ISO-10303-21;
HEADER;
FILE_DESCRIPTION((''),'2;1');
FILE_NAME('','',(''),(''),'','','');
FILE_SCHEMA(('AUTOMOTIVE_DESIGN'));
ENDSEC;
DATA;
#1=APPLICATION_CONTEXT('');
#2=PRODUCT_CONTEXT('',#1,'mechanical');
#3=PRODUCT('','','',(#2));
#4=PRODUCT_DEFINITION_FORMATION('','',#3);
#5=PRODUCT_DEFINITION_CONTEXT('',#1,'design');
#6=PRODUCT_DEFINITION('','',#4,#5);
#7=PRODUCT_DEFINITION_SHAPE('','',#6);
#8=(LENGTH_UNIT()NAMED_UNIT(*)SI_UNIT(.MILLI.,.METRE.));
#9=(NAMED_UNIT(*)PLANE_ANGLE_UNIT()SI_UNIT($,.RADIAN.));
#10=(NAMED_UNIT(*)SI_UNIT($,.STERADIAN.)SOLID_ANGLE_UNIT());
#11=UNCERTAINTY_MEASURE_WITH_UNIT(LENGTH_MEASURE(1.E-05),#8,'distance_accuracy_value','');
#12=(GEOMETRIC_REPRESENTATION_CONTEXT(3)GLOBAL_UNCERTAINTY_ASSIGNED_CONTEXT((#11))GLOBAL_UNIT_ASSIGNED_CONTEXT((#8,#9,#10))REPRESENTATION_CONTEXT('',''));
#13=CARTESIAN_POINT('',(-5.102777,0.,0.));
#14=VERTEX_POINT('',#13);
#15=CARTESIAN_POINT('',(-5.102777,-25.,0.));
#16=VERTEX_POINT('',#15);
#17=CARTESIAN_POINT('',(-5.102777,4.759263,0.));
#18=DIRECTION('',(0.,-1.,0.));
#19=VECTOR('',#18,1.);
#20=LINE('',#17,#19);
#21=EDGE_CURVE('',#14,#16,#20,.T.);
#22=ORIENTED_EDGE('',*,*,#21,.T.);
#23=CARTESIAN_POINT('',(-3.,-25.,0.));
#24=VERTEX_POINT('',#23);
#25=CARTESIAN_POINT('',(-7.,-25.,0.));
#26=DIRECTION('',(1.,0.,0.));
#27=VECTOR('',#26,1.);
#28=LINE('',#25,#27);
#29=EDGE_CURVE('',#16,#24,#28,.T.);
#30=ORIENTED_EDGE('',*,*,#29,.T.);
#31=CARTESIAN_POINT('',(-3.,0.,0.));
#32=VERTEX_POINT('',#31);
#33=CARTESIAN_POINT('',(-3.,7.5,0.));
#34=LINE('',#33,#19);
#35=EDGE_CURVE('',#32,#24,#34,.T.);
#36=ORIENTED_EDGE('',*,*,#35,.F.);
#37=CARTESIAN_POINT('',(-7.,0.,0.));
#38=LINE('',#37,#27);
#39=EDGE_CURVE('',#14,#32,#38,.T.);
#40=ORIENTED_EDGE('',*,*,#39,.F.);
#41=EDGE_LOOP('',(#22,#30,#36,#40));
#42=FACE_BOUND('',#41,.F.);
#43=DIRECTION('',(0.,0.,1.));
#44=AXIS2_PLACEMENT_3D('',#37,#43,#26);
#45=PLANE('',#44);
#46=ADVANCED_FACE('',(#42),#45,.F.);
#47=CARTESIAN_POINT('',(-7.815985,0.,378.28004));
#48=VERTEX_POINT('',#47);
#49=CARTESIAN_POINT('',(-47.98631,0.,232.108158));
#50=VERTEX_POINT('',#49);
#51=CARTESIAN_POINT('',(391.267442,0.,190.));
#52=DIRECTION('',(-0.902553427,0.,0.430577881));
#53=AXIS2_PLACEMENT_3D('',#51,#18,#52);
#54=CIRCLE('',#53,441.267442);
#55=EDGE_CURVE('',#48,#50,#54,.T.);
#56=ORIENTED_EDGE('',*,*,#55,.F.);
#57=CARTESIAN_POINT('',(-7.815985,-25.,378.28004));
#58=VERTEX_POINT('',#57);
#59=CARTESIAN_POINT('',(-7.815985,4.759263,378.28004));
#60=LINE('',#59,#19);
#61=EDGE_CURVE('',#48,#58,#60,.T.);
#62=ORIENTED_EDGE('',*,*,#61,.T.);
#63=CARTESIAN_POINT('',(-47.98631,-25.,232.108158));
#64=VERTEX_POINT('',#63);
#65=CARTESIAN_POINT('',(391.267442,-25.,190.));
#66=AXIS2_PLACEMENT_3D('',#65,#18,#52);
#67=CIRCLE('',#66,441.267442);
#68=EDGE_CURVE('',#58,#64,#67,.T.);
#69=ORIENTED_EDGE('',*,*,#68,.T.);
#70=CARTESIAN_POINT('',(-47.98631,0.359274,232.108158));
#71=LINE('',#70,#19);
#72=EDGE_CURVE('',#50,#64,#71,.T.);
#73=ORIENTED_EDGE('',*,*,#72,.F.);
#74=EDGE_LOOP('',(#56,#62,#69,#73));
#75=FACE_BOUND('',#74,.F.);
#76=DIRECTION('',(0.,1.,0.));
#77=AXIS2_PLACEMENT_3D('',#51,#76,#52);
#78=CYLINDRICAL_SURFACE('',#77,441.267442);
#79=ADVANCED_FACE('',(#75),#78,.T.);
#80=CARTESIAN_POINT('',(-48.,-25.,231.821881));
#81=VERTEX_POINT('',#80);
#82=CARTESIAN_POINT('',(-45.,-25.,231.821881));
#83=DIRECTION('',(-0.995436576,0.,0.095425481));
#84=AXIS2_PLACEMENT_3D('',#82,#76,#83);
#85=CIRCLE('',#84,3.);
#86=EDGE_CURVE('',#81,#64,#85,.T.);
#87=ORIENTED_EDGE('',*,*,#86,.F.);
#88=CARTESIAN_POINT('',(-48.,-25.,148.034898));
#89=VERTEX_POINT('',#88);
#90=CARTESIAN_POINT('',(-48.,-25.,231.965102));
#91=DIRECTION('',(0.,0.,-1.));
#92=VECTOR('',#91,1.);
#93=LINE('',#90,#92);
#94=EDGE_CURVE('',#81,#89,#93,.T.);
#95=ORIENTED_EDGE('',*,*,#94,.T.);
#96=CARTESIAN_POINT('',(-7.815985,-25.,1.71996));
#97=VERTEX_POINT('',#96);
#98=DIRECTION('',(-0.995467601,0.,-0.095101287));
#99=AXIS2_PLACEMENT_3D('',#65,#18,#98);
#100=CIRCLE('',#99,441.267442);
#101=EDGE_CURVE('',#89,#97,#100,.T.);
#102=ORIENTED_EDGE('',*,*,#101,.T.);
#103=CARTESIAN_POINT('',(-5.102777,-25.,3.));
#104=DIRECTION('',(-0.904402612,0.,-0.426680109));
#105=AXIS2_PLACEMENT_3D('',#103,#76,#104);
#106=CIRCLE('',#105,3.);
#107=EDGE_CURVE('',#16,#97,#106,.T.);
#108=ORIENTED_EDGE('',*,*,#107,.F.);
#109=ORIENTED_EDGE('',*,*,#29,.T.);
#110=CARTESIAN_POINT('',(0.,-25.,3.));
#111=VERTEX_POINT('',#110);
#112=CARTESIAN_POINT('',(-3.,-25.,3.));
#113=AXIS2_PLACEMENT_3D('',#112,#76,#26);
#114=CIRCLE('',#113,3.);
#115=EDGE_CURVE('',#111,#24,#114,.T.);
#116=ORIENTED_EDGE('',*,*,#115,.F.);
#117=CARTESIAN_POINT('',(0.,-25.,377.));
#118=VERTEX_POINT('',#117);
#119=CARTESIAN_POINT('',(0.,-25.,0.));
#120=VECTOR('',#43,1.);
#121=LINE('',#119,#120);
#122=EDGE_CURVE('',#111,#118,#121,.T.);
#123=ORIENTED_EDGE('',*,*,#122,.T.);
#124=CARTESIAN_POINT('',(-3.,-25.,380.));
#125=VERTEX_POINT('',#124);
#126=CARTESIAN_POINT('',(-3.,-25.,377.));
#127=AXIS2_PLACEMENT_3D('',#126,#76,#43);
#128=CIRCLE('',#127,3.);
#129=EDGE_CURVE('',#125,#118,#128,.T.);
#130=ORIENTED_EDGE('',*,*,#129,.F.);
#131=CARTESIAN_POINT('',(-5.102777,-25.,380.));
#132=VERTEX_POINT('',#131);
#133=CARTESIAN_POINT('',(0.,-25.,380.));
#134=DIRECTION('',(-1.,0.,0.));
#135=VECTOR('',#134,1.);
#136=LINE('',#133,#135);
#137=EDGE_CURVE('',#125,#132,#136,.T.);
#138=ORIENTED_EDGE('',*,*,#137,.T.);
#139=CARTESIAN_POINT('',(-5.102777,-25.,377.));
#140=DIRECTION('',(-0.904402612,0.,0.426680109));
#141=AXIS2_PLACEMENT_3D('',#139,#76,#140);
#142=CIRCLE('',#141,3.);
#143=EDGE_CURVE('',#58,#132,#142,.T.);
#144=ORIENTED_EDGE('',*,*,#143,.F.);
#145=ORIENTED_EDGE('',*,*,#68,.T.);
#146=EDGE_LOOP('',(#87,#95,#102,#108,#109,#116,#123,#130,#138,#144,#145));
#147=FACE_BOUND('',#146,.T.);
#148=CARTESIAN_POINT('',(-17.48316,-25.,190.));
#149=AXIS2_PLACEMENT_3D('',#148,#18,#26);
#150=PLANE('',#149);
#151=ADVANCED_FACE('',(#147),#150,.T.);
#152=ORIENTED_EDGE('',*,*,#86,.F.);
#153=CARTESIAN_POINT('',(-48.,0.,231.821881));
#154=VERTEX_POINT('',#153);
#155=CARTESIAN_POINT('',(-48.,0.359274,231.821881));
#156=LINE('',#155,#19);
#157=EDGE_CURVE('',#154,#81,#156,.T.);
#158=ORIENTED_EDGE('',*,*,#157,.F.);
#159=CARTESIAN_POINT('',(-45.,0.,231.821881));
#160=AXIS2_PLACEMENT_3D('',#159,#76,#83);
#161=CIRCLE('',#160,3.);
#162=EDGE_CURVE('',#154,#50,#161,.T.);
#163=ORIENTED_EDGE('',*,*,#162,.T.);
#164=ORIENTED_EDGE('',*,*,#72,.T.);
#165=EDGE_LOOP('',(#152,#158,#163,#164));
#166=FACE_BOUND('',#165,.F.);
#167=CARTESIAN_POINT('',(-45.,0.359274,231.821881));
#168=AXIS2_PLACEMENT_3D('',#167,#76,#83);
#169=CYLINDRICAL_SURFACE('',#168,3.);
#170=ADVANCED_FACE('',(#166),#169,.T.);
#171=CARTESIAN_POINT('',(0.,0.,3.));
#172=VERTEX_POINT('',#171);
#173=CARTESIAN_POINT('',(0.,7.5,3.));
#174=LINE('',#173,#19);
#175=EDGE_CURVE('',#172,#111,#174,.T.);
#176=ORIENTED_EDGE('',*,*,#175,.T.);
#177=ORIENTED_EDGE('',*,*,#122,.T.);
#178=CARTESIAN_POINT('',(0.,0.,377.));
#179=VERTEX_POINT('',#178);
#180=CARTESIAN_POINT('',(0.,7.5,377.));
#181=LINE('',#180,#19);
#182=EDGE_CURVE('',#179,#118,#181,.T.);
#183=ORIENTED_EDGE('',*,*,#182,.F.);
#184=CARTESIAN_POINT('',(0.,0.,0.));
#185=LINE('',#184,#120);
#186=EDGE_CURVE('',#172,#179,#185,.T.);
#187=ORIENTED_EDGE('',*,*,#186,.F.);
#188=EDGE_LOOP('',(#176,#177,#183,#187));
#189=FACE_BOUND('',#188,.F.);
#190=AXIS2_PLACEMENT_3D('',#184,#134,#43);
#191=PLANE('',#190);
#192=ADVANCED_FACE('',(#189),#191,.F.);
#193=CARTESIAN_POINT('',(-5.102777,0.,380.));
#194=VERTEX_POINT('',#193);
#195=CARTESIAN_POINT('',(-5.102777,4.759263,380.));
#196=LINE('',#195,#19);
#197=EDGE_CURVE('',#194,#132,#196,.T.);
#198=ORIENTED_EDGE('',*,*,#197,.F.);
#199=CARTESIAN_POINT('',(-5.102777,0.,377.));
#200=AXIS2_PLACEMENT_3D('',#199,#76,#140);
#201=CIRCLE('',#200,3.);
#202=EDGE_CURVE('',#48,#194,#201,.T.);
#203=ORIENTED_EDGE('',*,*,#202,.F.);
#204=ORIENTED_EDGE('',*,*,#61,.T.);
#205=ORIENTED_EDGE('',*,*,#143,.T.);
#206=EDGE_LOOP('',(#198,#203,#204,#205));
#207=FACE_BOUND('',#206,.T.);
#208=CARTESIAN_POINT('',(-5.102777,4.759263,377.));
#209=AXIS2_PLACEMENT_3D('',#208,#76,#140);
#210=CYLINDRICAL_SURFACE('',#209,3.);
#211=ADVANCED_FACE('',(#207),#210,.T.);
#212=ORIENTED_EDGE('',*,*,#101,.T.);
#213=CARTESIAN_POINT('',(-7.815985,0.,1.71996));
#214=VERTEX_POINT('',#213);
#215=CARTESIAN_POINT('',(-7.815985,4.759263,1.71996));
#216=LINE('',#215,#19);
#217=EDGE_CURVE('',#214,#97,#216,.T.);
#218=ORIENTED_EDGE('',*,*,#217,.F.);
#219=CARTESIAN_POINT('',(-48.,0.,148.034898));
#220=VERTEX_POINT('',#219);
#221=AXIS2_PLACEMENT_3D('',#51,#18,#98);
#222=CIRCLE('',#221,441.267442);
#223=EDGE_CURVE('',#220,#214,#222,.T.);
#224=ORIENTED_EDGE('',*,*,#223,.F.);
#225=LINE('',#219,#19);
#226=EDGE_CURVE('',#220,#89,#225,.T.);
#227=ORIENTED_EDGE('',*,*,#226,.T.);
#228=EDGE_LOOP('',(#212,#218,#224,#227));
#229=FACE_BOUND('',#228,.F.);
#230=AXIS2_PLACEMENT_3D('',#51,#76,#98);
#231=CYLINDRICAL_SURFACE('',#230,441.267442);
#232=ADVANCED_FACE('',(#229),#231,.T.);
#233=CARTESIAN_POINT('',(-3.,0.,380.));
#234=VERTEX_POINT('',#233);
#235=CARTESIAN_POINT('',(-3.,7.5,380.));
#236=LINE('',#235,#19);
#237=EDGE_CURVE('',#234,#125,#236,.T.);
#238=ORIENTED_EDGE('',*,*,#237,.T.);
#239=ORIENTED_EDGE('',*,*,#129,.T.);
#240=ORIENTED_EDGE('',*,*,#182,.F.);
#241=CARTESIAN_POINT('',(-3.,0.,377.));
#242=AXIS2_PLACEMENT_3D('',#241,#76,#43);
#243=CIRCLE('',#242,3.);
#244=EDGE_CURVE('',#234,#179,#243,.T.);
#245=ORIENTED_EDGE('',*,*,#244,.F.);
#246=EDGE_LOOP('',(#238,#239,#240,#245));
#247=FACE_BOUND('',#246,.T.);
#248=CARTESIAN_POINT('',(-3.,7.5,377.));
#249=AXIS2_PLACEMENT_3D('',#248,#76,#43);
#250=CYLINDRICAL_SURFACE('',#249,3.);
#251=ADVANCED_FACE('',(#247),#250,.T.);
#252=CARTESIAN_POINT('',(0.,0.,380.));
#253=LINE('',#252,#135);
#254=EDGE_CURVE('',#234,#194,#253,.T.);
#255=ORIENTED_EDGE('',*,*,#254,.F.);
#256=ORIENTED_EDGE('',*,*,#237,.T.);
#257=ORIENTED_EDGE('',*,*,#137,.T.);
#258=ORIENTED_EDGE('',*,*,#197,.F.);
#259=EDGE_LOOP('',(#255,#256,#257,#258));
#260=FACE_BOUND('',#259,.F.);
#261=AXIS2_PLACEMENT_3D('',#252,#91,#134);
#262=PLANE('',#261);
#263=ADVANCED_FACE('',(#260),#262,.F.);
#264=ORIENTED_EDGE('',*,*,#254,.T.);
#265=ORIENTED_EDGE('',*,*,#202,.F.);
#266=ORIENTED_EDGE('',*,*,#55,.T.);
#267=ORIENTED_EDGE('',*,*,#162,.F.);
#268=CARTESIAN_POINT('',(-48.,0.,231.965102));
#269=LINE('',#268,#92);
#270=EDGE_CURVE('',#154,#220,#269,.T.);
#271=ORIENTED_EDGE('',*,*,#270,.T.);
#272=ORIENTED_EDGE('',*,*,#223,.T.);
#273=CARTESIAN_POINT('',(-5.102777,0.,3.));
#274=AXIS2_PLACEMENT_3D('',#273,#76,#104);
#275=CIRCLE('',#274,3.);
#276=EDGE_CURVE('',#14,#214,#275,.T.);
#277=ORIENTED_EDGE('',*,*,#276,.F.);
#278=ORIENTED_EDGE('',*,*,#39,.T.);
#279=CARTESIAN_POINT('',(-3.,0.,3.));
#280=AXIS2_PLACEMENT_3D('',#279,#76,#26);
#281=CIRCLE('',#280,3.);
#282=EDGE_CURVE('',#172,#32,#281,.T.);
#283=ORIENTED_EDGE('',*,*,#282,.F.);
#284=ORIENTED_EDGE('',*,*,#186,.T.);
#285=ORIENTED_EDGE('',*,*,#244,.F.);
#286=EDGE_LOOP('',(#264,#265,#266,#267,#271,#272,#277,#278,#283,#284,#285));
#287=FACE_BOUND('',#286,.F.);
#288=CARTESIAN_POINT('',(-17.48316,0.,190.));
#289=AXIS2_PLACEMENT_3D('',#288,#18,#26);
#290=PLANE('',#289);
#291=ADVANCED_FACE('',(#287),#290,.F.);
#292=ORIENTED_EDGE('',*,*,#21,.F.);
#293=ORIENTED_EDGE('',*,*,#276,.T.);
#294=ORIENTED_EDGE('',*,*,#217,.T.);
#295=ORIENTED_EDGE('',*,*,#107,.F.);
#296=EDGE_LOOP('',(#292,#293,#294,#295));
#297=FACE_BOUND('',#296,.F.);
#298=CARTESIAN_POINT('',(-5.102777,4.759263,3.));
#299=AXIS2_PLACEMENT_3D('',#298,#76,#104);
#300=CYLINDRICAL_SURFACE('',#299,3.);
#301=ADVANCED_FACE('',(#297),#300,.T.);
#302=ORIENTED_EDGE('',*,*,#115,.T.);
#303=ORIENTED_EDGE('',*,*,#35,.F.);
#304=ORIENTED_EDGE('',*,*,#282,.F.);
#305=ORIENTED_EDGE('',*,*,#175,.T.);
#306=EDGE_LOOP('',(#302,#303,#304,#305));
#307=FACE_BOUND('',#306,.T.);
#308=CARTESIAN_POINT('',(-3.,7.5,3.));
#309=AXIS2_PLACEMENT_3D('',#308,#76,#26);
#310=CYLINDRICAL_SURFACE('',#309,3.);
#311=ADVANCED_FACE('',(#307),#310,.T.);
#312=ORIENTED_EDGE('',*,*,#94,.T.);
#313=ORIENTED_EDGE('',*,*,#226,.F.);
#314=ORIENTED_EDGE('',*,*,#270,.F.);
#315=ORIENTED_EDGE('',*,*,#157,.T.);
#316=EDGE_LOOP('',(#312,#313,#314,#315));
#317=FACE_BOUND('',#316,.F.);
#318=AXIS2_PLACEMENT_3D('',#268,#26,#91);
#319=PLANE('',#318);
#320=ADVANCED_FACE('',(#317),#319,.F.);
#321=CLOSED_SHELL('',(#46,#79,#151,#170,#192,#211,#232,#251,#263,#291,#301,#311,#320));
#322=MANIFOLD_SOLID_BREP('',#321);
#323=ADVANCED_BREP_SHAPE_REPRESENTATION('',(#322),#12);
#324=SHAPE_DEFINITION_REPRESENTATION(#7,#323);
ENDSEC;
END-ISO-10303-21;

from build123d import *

# Parameters (mm, degrees)
F1_DEPTH    = 25
F2_T1_DEPTH = 34.5185252635
F2_T3_DEPTH = 40
F2_T5_DEPTH = 25.7185484132


# Not quite as in the source:
# - a fillet or chamfer that OpenCascade refuses, or shapes differently, is made with other operations: its cross-section is extruded or revolved along the edge and cut away or added


with BuildPart() as f1:
    # F0 (on Front) → F1 (new body)
    with BuildSketch(Plane.XZ):
        with BuildLine():
            Line((-7, 0), (0, 0))
            Line((0, 0), (0, 380))
            Line((0, 380), (-7, 380))
            ThreePointArc((-7, 380), (-33.9910126529, 307.7803129177), (-48, 231.9651017804))
            Line((-48, 231.9651017804), (-48, 190))
            Line((-48, 190), (-48, 148.0348982196))
            ThreePointArc((-48, 148.0348982196), (-33.9910126529, 72.2196870823), (-7, 0))
        make_face()
    extrude(amount=F1_DEPTH)

    # F2: fillet of radius 3 on 5 edges, made by hand

    # F2_s2 → F2_t1 (cut)
    with BuildSketch(Plane.XZ.offset(-4.7592626318)):
        with BuildLine():
            ThreePointArc((-7.8159850821, 378.2800403279), (-6.7089962565, 379.533783829), (-5.1027772465, 380))
            Line((-5.1027772465, 380), (-7, 380))
            ThreePointArc((-7, 380), (-7.408920068, 379.1404602023), (-7.8159850821, 378.2800403279))
        make_face()
        with BuildLine():
            ThreePointArc((-7.8159850821, 1.7199596721), (-6.7089962565, 0.466216171), (-5.1027772465, 0))
            Line((-5.1027772465, 0), (-7, 0))
            ThreePointArc((-7, 0), (-7.408920068, 0.8595397977), (-7.8159850821, 1.7199596721))
        make_face()
    extrude(amount=F2_T1_DEPTH, mode=Mode.SUBTRACT)

    # F2_s4 → F2_t3 (cut)
    with BuildSketch(Plane.XZ.offset(-7.5)):
        with BuildLine():
            ThreePointArc((-3, 380), (-0.8786796564, 379.1213203436), (0, 377))
            Line((0, 377), (0, 380))
            Line((0, 380), (-3, 380))
        make_face()
        with BuildLine():
            ThreePointArc((0, 3), (-0.8786796564, 0.8786796564), (-3, 0))
            Line((-3, 0), (0, 0))
            Line((0, 0), (0, 3))
        make_face()
    extrude(amount=F2_T3_DEPTH, mode=Mode.SUBTRACT)

    # F2_s6 → F2_t5 (cut)
    with BuildSketch(Plane.XZ.offset(-0.3592742066)):
        with BuildLine():
            ThreePointArc((-47.9863097291, 232.1081578861), (-47.9965754777, 231.9651832447), (-48, 231.8218814431))
            Line((-48, 231.8218814431), (-48, 231.9651017804))
            ThreePointArc((-48, 231.9651017804), (-47.9931606883, 232.0366303906), (-47.9863097291, 232.1081578861))
        make_face()
    extrude(amount=F2_T5_DEPTH, mode=Mode.SUBTRACT)


solid = f1.part
